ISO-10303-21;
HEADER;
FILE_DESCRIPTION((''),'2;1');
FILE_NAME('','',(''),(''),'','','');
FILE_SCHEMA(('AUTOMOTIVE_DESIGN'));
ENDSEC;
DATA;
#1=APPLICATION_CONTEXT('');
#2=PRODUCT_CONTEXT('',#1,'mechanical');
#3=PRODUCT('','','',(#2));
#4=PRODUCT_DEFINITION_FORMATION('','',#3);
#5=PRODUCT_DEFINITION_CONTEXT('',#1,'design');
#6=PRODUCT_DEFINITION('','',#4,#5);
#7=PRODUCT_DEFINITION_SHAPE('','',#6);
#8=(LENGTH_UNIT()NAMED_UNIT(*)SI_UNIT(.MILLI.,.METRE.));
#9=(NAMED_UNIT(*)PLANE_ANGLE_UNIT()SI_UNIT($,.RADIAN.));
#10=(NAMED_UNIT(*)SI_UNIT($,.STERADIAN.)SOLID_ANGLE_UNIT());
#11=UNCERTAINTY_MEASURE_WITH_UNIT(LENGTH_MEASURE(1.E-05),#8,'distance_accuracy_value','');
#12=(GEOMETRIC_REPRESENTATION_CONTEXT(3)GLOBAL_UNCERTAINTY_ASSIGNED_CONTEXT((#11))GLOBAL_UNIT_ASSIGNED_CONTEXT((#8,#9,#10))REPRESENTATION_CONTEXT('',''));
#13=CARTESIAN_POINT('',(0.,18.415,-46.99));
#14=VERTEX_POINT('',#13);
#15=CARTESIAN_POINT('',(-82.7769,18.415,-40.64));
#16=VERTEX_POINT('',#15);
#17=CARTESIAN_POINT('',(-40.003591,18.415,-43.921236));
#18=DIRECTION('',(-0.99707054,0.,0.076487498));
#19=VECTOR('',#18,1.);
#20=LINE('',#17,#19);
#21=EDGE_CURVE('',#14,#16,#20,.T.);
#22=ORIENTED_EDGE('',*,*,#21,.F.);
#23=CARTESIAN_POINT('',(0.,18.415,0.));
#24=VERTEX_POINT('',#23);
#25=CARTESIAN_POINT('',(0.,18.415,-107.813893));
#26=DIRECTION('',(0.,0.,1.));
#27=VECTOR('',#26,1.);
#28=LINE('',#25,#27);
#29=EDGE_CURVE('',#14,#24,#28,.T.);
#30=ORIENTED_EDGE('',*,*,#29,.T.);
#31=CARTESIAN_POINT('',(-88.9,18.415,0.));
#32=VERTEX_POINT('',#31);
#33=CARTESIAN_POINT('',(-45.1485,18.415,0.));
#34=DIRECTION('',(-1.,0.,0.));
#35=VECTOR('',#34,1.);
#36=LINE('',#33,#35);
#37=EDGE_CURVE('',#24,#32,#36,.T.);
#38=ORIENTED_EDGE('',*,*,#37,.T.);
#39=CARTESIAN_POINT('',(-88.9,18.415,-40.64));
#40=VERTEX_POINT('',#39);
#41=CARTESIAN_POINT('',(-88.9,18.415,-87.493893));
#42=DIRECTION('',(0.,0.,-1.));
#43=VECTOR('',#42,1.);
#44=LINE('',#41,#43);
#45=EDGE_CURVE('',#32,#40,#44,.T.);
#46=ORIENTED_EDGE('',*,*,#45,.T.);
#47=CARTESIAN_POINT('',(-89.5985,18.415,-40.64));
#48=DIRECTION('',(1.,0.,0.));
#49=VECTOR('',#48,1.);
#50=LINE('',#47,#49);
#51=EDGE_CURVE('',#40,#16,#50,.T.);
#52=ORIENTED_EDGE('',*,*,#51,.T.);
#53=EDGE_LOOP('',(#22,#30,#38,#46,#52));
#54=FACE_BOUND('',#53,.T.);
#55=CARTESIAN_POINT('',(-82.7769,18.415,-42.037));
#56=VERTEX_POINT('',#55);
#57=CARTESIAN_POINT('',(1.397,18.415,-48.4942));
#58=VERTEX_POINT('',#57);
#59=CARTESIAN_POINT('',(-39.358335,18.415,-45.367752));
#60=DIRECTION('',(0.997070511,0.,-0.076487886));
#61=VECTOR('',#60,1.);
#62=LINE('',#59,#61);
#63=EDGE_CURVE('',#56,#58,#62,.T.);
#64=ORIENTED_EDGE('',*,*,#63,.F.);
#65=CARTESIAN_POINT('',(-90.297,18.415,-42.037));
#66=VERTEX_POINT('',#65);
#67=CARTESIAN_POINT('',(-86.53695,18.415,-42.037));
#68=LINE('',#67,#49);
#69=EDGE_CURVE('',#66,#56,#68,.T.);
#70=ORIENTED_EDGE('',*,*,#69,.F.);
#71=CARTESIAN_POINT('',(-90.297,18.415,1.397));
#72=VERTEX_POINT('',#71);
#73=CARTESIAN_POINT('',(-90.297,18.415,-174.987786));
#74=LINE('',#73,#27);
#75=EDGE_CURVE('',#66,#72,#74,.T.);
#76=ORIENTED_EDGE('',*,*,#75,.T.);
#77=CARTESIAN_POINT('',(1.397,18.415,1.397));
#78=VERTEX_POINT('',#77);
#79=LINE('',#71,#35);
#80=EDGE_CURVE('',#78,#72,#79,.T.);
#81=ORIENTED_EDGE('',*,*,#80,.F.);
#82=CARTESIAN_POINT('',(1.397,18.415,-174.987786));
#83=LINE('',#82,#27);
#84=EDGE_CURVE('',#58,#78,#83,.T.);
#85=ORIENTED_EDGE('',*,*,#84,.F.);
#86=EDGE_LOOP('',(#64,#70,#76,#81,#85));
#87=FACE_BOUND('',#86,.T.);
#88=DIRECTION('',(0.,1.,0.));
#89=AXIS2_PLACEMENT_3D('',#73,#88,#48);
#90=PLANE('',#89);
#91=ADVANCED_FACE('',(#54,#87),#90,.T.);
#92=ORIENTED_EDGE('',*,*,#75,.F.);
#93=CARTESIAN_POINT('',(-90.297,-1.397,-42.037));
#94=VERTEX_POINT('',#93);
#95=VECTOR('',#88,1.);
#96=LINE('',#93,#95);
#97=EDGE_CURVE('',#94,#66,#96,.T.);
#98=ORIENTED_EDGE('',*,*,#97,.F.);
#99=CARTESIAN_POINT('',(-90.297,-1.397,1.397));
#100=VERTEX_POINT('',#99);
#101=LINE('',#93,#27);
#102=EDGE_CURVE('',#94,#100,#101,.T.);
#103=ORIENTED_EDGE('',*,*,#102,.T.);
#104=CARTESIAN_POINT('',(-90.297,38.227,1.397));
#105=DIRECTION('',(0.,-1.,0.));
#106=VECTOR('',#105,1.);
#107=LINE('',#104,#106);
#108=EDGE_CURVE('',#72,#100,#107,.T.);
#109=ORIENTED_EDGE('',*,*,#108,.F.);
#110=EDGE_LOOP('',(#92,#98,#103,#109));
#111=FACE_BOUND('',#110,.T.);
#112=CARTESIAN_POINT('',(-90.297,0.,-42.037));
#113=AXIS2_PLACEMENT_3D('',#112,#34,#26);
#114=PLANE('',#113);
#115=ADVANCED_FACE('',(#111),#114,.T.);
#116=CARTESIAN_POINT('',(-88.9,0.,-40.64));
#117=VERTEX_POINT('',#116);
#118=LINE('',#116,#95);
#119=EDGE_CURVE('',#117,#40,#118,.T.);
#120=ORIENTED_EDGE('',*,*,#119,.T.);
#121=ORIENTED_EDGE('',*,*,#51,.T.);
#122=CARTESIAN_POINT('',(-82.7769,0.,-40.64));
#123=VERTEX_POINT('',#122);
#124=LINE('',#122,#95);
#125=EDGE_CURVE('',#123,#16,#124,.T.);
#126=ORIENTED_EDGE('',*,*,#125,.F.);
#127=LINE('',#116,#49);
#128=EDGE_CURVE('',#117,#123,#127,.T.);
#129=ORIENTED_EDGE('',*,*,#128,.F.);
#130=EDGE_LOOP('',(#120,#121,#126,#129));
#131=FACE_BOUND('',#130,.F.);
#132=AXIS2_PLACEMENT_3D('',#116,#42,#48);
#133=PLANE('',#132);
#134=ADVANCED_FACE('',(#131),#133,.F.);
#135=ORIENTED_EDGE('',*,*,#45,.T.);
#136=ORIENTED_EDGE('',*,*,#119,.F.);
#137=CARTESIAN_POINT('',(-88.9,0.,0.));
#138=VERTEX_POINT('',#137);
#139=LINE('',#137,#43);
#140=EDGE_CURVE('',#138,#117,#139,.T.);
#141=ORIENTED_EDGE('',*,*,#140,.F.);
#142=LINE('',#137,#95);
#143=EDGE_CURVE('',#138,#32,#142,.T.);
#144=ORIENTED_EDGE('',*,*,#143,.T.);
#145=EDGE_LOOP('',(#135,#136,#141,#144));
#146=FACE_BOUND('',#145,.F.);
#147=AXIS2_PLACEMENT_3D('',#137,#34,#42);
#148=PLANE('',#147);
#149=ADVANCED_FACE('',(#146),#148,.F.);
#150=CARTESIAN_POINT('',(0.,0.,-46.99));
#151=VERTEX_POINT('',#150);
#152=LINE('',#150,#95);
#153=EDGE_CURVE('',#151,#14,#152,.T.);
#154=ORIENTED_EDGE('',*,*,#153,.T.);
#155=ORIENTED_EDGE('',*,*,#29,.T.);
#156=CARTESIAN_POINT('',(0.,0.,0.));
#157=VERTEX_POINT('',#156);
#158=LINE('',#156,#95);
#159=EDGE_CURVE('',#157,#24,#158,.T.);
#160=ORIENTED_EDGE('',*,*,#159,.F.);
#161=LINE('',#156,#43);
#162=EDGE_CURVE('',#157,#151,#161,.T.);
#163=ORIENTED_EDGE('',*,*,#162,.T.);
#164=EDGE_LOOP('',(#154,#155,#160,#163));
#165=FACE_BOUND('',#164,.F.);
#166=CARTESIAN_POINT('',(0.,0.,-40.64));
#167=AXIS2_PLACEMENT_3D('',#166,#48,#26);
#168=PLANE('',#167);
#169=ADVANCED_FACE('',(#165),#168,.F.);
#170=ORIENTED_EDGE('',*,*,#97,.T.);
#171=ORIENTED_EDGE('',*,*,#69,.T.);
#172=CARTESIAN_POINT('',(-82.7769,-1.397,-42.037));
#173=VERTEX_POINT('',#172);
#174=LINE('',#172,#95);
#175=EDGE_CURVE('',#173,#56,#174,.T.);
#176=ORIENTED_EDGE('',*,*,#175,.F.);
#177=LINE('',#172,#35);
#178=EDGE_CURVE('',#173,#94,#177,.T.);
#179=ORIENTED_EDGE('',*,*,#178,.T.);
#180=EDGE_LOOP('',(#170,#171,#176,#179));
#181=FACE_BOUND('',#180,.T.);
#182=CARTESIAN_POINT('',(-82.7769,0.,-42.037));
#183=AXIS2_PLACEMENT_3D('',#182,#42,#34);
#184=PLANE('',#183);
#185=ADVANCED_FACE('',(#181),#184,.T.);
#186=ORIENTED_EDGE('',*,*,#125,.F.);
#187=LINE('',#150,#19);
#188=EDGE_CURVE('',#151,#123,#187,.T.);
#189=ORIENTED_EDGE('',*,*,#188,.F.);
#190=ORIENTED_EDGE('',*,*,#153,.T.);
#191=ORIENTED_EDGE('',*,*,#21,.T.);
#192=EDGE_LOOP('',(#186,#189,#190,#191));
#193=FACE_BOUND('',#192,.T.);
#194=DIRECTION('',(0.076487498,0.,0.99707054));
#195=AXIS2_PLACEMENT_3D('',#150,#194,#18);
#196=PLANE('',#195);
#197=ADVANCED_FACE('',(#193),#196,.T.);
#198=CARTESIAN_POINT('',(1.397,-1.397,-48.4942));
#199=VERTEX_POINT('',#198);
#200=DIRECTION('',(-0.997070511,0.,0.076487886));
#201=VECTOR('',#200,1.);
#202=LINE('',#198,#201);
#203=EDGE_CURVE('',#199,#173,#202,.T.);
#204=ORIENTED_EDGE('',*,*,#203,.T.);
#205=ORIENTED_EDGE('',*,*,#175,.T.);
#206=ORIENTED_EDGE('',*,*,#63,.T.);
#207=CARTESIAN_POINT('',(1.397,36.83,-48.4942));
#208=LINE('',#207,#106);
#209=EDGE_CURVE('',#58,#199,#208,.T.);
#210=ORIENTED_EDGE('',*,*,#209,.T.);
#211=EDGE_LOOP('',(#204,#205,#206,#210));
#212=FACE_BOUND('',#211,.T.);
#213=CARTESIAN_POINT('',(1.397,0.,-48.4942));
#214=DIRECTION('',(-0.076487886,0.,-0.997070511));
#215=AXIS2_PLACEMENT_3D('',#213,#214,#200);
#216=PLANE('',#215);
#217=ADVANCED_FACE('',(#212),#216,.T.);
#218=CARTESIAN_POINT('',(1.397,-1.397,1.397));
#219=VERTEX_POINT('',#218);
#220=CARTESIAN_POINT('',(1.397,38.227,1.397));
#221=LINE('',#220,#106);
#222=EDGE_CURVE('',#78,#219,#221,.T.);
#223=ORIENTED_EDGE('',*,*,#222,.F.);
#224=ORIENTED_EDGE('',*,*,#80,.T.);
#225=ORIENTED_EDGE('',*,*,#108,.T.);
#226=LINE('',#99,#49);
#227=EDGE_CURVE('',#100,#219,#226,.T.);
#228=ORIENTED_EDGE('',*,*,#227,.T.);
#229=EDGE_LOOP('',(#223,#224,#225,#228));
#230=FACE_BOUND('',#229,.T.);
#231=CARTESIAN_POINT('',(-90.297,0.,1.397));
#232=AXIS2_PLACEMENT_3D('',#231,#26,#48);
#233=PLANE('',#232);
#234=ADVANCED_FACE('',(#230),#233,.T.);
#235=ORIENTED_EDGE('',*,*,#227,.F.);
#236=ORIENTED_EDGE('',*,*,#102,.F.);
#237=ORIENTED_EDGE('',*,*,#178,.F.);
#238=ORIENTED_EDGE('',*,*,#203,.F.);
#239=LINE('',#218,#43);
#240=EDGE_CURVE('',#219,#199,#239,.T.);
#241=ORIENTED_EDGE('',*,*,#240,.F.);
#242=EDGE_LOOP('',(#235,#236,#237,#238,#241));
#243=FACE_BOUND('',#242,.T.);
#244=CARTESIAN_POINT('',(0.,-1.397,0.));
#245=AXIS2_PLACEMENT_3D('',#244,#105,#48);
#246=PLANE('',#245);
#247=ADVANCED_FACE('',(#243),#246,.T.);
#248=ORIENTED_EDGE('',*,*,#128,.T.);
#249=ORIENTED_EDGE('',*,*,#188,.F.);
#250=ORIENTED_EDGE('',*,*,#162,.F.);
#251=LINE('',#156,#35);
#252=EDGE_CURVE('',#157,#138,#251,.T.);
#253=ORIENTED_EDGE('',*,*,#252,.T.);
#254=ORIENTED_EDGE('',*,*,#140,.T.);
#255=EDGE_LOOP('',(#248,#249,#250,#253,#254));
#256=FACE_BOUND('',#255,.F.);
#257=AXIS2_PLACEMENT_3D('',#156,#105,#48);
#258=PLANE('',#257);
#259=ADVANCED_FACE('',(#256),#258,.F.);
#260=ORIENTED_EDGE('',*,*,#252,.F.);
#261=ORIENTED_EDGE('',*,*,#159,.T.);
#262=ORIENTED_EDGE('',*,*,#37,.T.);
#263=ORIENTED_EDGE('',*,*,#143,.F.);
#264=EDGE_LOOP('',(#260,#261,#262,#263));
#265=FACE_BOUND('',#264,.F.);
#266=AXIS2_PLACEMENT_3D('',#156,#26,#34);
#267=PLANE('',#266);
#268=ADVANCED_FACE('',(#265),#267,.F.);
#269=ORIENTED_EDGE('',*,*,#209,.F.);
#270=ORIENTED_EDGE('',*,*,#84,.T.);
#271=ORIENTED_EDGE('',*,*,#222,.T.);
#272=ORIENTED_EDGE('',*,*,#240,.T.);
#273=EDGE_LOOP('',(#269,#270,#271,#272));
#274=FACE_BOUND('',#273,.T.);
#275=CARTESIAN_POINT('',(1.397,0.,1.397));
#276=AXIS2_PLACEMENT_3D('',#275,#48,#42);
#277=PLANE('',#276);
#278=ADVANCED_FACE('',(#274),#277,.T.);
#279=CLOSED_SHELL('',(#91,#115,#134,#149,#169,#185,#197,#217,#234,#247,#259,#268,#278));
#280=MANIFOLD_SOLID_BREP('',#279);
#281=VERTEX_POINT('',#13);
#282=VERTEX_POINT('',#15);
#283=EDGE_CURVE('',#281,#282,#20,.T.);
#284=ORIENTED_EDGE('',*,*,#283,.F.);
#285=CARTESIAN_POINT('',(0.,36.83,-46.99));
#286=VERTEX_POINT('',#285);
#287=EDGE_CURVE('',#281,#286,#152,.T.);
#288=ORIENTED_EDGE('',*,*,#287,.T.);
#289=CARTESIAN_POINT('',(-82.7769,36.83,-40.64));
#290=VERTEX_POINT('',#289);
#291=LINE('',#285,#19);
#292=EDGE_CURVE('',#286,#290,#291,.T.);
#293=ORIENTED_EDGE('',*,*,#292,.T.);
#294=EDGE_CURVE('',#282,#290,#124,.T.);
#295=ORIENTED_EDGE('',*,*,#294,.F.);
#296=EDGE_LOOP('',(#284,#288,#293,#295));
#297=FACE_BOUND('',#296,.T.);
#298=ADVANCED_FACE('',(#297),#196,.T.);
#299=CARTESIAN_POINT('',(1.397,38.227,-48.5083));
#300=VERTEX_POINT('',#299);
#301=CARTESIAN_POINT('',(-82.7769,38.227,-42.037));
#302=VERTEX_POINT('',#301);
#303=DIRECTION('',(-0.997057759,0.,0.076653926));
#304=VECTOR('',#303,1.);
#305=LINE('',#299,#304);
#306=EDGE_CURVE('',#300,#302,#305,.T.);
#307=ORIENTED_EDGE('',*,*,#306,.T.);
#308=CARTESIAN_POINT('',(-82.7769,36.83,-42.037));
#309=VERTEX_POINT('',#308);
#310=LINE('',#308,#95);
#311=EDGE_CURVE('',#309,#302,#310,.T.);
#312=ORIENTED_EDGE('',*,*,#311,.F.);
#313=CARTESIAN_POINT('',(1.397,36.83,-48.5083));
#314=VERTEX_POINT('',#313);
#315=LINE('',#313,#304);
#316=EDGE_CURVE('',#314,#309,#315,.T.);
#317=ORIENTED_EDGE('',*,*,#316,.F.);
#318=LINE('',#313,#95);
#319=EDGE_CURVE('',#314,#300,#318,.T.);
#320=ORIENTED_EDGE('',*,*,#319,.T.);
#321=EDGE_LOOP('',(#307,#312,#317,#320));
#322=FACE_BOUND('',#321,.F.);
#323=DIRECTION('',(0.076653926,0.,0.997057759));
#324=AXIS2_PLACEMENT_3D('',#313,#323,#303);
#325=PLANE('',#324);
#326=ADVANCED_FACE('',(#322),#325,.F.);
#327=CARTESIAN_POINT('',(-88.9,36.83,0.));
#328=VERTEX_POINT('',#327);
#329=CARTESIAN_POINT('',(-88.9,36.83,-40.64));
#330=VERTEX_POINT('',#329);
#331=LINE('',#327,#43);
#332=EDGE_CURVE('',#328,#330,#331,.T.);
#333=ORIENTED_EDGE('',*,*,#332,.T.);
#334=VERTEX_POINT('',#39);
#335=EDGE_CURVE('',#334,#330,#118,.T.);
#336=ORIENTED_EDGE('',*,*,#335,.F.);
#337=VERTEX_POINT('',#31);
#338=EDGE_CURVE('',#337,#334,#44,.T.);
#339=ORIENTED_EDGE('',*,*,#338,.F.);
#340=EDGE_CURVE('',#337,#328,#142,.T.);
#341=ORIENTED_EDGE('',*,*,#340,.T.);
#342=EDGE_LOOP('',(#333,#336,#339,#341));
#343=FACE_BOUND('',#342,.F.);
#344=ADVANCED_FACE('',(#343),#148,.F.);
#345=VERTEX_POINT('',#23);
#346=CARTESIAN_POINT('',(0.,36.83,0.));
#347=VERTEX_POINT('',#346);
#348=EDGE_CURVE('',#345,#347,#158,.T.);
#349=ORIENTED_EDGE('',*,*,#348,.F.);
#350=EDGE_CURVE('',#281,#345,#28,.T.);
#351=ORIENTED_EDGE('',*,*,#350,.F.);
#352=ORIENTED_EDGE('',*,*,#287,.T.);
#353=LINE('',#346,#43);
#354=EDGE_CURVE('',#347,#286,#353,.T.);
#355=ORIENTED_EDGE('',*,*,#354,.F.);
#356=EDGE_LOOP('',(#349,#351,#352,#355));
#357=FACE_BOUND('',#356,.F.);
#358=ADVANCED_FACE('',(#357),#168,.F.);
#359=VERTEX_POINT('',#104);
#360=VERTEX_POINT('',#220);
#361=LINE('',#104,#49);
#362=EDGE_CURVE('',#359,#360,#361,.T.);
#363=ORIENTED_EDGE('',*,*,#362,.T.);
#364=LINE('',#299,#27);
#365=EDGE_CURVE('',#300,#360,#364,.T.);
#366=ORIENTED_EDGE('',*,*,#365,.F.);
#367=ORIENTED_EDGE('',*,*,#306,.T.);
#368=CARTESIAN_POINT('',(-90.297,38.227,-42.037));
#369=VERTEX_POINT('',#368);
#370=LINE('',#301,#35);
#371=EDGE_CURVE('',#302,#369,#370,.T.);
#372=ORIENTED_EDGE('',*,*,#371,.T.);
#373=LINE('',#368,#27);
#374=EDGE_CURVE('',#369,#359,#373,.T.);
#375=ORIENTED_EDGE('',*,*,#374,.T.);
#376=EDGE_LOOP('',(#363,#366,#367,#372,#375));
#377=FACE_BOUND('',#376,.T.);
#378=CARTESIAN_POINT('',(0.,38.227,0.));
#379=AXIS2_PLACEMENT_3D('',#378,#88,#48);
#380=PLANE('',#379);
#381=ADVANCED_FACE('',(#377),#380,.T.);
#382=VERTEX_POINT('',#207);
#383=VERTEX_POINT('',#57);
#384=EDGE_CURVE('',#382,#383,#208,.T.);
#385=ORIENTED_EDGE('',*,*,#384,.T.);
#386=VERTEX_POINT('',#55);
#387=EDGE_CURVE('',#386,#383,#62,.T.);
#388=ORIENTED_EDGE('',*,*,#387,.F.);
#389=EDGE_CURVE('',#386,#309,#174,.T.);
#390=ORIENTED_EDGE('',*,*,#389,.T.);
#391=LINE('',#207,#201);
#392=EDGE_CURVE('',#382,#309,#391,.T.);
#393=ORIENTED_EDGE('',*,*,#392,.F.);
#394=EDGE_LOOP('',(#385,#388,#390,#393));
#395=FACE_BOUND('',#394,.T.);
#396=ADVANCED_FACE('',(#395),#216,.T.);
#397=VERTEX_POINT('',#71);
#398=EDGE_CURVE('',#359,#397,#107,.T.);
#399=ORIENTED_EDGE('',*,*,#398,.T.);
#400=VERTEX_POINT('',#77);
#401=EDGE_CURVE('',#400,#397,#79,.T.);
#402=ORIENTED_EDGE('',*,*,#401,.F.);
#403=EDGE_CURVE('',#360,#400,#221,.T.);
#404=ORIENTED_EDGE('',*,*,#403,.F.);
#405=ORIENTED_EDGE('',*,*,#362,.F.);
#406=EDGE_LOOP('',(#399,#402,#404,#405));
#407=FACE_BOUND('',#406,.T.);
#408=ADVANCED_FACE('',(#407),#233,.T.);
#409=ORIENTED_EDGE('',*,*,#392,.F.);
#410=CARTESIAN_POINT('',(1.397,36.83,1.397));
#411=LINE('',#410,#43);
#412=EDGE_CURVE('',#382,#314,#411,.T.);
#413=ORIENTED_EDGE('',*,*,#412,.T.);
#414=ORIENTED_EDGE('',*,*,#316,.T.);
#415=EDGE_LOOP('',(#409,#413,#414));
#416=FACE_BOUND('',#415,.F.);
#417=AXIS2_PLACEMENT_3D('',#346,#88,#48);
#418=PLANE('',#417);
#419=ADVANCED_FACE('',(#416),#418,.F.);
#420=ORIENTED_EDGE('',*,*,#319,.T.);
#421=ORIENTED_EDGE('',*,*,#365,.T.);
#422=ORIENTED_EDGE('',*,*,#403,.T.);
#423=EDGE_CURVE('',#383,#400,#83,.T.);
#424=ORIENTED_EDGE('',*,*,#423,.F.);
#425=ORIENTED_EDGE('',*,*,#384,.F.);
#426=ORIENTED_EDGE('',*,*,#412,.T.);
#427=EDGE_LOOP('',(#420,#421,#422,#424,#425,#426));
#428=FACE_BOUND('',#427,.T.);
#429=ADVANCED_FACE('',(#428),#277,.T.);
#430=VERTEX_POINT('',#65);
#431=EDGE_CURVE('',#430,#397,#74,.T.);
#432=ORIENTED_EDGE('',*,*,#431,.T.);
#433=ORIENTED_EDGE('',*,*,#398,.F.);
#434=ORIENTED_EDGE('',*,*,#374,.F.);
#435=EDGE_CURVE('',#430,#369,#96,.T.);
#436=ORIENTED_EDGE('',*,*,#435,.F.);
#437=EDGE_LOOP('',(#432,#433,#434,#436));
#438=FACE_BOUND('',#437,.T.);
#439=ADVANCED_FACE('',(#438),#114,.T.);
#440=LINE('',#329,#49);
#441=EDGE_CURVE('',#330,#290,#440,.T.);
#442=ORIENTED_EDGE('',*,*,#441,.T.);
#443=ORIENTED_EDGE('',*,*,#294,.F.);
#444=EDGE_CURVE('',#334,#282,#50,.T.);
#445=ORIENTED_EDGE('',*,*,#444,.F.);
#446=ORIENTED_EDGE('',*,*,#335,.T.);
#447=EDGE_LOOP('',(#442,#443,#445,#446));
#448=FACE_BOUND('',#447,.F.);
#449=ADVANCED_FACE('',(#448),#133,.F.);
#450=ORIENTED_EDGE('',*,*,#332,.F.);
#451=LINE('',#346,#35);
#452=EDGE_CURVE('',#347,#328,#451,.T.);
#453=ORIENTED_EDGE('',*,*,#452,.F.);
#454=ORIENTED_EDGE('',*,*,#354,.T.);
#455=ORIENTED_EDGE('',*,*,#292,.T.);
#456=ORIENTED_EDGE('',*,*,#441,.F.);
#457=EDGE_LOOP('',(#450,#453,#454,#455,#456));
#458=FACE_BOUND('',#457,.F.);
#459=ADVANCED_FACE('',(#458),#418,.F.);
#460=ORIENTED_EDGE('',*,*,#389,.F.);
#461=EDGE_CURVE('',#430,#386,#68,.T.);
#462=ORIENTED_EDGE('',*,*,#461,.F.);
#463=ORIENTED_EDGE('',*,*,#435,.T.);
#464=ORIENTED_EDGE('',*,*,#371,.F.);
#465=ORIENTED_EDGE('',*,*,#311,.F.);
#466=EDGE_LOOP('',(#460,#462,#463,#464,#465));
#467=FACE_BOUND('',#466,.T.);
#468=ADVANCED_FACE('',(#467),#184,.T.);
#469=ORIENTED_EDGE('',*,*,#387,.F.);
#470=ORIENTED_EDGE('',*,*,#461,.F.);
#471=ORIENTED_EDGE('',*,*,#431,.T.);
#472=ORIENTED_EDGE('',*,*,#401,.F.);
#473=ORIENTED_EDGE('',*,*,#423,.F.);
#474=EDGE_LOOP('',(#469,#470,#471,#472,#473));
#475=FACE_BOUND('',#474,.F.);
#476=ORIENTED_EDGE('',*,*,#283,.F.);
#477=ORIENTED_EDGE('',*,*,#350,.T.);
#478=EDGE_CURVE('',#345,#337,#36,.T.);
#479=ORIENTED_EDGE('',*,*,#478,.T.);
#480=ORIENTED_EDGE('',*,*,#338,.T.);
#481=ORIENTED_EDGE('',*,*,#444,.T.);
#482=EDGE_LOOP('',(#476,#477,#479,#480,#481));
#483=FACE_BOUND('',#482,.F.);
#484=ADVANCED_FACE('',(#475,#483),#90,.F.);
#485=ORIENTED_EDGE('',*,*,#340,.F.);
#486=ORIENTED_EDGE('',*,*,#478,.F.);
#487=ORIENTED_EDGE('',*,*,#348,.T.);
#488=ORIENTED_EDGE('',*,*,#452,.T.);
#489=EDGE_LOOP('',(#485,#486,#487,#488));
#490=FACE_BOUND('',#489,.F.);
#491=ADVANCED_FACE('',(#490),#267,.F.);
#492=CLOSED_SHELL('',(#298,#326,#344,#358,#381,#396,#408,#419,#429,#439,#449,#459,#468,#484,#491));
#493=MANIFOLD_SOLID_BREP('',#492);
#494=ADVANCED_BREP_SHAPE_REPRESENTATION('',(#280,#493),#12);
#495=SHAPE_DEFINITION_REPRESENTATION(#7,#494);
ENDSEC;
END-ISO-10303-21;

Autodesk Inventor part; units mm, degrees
ref_plane "YZ Plane" through (0, 0, 0) normal (1, 0, 0) x (0, 1, 0)
ref_plane "XZ Plane" through (0, 0, 0) normal (0, 1, 0) x (-1, 0, 0)
ref_plane "XY Plane" through (0, 0, 0) normal (0, 0, 1) x (1, 0, 0)
sketch "Sketch1" plane through (0, 0, 0) normal (0, 1, 0) x (-1, 0, 0)
  point P0 (0, 0)
sketch "Sketch2" plane through (0, 0, 0) normal (0, 1, 0) x (-1, 0, 0)
  line L0 (0, 0) -> (88.9, 0)
  line L1 (88.9, 0) -> (88.9, -40.64)
  line L2 (88.9, -40.64) -> (82.7769, -40.64)
  line L3 (0, -40.64) -> (0, 0)
  line L4 (0, -40.64) -> (0, -46.99)
  line L5 (0, -46.99) -> (82.7769, -40.64)
  line L6 (88.9, 1.397) -> (0, 1.397)
  line L7 (0, 1.397) -> (-1.397, 1.397)
  line L8 (-1.397, 1.397) -> (-1.397, -42.037)
  line L9 (-1.397, -42.037) -> (-1.397, -47.0972)
  line L10 (-1.397, -47.0972) -> (-1.397, -48.4942)
  line L11 (-1.397, -48.4942) -> (82.7769, -42.037)
  line L12 (82.7769, -42.037) -> (88.9, -42.037)
  line L13 (88.9, -42.037) -> (90.297, -42.037)
  line L14 (90.297, -42.037) -> (90.297, 1.397)
  line L15 (90.297, 1.397) -> (88.9, 1.397)
  dimension "d0" = 88.9
  dimension "d2" = 6.35
  dimension "d6" = 1.397
  dimension "d7" = 43.434
  dimension "d8" = 1.397
  dimension "d9" = 1.397
extrude "Extrusion1" add sketch "Sketch2" along normal blind 36.83
sketch "Sketch3" plane through (0, 36.83, 0) normal (0, 1, 0) x (1, 0, 0)
  point P0 (0, 0)
sketch "Sketch4" plane through (0, 36.83, 0) normal (0, 1, 0) x (1, 0, 0)
  line L0 (-90.297, -1.397) -> (1.397, -1.397) projected
  line L1 (1.397, -1.397) -> (1.397, 48.5083)
  line L2 (-82.7769, 42.037) -> (-90.297, 42.037) projected
  line L3 (1.397, 48.5083) -> (-82.7769, 42.037)
  line L4 (-82.7769, 42.037) -> (-90.297, 42.037)
  line L5 (-90.297, 42.037) -> (-90.297, -1.397) projected
  line L6 (-90.297, 42.037) -> (-90.297, -1.397)
  line L7 (1.397, -1.397) -> (1.397, 48.4942) projected
  line L8 (-90.297, -1.397) -> (1.397, -1.397)
  line L9 (1.397, -1.397) -> (1.397, 48.4942)
  point P0 (0, 0)
extrude "Extrusion2" add sketch "Sketch4" along normal blind 1.397
sketch "Sketch5" plane through (0, 0, 0) normal (0, -1, 0) x (1, 0, 0)
  line L0 (1.397, -48.4942) -> (-82.7769, -42.037) projected
  line L1 (1.397, -48.4942) -> (-82.7769, -42.037)
  line L2 (-82.7769, -42.037) -> (-90.297, -42.037)
  line L3 (-90.297, 1.397) -> (1.397, 1.397) projected
  line L4 (-90.297, -42.037) -> (-90.297, 1.397)
  line L5 (-90.297, 1.397) -> (1.397, 1.397)
  line L6 (1.397, 1.397) -> (1.397, -48.4942)
  point P0 (0, 0)
extrude "Extrusion3" add sketch "Sketch5" along normal blind 1.397
sketch "Sketch6" plane through (-82.7769, -1.397, -42.037) normal (-0.0764875, 0, -0.9970705) x (-0.9970705, 0, 0.0764875)
  point P0 (-79.3191, 1.397)
sketch "Sketch7" plane through (-90.297, 38.227, 1.397) normal (0, 0, 1) x (1, 0, 0)
  line L0 (0, -39.624) -> (0, 0) projected
  line L1 (0, -19.812) -> (91.694, -19.812)
  line L2 (91.694, -39.624) -> (91.694, 0) projected
  point P0 (90.297, -38.227)
split body "Split1" sketch "Sketch7" result two bodies curves L1 first body at (-26.661, 37.727, -29.7114)
properties part number "EnclosureTop"
